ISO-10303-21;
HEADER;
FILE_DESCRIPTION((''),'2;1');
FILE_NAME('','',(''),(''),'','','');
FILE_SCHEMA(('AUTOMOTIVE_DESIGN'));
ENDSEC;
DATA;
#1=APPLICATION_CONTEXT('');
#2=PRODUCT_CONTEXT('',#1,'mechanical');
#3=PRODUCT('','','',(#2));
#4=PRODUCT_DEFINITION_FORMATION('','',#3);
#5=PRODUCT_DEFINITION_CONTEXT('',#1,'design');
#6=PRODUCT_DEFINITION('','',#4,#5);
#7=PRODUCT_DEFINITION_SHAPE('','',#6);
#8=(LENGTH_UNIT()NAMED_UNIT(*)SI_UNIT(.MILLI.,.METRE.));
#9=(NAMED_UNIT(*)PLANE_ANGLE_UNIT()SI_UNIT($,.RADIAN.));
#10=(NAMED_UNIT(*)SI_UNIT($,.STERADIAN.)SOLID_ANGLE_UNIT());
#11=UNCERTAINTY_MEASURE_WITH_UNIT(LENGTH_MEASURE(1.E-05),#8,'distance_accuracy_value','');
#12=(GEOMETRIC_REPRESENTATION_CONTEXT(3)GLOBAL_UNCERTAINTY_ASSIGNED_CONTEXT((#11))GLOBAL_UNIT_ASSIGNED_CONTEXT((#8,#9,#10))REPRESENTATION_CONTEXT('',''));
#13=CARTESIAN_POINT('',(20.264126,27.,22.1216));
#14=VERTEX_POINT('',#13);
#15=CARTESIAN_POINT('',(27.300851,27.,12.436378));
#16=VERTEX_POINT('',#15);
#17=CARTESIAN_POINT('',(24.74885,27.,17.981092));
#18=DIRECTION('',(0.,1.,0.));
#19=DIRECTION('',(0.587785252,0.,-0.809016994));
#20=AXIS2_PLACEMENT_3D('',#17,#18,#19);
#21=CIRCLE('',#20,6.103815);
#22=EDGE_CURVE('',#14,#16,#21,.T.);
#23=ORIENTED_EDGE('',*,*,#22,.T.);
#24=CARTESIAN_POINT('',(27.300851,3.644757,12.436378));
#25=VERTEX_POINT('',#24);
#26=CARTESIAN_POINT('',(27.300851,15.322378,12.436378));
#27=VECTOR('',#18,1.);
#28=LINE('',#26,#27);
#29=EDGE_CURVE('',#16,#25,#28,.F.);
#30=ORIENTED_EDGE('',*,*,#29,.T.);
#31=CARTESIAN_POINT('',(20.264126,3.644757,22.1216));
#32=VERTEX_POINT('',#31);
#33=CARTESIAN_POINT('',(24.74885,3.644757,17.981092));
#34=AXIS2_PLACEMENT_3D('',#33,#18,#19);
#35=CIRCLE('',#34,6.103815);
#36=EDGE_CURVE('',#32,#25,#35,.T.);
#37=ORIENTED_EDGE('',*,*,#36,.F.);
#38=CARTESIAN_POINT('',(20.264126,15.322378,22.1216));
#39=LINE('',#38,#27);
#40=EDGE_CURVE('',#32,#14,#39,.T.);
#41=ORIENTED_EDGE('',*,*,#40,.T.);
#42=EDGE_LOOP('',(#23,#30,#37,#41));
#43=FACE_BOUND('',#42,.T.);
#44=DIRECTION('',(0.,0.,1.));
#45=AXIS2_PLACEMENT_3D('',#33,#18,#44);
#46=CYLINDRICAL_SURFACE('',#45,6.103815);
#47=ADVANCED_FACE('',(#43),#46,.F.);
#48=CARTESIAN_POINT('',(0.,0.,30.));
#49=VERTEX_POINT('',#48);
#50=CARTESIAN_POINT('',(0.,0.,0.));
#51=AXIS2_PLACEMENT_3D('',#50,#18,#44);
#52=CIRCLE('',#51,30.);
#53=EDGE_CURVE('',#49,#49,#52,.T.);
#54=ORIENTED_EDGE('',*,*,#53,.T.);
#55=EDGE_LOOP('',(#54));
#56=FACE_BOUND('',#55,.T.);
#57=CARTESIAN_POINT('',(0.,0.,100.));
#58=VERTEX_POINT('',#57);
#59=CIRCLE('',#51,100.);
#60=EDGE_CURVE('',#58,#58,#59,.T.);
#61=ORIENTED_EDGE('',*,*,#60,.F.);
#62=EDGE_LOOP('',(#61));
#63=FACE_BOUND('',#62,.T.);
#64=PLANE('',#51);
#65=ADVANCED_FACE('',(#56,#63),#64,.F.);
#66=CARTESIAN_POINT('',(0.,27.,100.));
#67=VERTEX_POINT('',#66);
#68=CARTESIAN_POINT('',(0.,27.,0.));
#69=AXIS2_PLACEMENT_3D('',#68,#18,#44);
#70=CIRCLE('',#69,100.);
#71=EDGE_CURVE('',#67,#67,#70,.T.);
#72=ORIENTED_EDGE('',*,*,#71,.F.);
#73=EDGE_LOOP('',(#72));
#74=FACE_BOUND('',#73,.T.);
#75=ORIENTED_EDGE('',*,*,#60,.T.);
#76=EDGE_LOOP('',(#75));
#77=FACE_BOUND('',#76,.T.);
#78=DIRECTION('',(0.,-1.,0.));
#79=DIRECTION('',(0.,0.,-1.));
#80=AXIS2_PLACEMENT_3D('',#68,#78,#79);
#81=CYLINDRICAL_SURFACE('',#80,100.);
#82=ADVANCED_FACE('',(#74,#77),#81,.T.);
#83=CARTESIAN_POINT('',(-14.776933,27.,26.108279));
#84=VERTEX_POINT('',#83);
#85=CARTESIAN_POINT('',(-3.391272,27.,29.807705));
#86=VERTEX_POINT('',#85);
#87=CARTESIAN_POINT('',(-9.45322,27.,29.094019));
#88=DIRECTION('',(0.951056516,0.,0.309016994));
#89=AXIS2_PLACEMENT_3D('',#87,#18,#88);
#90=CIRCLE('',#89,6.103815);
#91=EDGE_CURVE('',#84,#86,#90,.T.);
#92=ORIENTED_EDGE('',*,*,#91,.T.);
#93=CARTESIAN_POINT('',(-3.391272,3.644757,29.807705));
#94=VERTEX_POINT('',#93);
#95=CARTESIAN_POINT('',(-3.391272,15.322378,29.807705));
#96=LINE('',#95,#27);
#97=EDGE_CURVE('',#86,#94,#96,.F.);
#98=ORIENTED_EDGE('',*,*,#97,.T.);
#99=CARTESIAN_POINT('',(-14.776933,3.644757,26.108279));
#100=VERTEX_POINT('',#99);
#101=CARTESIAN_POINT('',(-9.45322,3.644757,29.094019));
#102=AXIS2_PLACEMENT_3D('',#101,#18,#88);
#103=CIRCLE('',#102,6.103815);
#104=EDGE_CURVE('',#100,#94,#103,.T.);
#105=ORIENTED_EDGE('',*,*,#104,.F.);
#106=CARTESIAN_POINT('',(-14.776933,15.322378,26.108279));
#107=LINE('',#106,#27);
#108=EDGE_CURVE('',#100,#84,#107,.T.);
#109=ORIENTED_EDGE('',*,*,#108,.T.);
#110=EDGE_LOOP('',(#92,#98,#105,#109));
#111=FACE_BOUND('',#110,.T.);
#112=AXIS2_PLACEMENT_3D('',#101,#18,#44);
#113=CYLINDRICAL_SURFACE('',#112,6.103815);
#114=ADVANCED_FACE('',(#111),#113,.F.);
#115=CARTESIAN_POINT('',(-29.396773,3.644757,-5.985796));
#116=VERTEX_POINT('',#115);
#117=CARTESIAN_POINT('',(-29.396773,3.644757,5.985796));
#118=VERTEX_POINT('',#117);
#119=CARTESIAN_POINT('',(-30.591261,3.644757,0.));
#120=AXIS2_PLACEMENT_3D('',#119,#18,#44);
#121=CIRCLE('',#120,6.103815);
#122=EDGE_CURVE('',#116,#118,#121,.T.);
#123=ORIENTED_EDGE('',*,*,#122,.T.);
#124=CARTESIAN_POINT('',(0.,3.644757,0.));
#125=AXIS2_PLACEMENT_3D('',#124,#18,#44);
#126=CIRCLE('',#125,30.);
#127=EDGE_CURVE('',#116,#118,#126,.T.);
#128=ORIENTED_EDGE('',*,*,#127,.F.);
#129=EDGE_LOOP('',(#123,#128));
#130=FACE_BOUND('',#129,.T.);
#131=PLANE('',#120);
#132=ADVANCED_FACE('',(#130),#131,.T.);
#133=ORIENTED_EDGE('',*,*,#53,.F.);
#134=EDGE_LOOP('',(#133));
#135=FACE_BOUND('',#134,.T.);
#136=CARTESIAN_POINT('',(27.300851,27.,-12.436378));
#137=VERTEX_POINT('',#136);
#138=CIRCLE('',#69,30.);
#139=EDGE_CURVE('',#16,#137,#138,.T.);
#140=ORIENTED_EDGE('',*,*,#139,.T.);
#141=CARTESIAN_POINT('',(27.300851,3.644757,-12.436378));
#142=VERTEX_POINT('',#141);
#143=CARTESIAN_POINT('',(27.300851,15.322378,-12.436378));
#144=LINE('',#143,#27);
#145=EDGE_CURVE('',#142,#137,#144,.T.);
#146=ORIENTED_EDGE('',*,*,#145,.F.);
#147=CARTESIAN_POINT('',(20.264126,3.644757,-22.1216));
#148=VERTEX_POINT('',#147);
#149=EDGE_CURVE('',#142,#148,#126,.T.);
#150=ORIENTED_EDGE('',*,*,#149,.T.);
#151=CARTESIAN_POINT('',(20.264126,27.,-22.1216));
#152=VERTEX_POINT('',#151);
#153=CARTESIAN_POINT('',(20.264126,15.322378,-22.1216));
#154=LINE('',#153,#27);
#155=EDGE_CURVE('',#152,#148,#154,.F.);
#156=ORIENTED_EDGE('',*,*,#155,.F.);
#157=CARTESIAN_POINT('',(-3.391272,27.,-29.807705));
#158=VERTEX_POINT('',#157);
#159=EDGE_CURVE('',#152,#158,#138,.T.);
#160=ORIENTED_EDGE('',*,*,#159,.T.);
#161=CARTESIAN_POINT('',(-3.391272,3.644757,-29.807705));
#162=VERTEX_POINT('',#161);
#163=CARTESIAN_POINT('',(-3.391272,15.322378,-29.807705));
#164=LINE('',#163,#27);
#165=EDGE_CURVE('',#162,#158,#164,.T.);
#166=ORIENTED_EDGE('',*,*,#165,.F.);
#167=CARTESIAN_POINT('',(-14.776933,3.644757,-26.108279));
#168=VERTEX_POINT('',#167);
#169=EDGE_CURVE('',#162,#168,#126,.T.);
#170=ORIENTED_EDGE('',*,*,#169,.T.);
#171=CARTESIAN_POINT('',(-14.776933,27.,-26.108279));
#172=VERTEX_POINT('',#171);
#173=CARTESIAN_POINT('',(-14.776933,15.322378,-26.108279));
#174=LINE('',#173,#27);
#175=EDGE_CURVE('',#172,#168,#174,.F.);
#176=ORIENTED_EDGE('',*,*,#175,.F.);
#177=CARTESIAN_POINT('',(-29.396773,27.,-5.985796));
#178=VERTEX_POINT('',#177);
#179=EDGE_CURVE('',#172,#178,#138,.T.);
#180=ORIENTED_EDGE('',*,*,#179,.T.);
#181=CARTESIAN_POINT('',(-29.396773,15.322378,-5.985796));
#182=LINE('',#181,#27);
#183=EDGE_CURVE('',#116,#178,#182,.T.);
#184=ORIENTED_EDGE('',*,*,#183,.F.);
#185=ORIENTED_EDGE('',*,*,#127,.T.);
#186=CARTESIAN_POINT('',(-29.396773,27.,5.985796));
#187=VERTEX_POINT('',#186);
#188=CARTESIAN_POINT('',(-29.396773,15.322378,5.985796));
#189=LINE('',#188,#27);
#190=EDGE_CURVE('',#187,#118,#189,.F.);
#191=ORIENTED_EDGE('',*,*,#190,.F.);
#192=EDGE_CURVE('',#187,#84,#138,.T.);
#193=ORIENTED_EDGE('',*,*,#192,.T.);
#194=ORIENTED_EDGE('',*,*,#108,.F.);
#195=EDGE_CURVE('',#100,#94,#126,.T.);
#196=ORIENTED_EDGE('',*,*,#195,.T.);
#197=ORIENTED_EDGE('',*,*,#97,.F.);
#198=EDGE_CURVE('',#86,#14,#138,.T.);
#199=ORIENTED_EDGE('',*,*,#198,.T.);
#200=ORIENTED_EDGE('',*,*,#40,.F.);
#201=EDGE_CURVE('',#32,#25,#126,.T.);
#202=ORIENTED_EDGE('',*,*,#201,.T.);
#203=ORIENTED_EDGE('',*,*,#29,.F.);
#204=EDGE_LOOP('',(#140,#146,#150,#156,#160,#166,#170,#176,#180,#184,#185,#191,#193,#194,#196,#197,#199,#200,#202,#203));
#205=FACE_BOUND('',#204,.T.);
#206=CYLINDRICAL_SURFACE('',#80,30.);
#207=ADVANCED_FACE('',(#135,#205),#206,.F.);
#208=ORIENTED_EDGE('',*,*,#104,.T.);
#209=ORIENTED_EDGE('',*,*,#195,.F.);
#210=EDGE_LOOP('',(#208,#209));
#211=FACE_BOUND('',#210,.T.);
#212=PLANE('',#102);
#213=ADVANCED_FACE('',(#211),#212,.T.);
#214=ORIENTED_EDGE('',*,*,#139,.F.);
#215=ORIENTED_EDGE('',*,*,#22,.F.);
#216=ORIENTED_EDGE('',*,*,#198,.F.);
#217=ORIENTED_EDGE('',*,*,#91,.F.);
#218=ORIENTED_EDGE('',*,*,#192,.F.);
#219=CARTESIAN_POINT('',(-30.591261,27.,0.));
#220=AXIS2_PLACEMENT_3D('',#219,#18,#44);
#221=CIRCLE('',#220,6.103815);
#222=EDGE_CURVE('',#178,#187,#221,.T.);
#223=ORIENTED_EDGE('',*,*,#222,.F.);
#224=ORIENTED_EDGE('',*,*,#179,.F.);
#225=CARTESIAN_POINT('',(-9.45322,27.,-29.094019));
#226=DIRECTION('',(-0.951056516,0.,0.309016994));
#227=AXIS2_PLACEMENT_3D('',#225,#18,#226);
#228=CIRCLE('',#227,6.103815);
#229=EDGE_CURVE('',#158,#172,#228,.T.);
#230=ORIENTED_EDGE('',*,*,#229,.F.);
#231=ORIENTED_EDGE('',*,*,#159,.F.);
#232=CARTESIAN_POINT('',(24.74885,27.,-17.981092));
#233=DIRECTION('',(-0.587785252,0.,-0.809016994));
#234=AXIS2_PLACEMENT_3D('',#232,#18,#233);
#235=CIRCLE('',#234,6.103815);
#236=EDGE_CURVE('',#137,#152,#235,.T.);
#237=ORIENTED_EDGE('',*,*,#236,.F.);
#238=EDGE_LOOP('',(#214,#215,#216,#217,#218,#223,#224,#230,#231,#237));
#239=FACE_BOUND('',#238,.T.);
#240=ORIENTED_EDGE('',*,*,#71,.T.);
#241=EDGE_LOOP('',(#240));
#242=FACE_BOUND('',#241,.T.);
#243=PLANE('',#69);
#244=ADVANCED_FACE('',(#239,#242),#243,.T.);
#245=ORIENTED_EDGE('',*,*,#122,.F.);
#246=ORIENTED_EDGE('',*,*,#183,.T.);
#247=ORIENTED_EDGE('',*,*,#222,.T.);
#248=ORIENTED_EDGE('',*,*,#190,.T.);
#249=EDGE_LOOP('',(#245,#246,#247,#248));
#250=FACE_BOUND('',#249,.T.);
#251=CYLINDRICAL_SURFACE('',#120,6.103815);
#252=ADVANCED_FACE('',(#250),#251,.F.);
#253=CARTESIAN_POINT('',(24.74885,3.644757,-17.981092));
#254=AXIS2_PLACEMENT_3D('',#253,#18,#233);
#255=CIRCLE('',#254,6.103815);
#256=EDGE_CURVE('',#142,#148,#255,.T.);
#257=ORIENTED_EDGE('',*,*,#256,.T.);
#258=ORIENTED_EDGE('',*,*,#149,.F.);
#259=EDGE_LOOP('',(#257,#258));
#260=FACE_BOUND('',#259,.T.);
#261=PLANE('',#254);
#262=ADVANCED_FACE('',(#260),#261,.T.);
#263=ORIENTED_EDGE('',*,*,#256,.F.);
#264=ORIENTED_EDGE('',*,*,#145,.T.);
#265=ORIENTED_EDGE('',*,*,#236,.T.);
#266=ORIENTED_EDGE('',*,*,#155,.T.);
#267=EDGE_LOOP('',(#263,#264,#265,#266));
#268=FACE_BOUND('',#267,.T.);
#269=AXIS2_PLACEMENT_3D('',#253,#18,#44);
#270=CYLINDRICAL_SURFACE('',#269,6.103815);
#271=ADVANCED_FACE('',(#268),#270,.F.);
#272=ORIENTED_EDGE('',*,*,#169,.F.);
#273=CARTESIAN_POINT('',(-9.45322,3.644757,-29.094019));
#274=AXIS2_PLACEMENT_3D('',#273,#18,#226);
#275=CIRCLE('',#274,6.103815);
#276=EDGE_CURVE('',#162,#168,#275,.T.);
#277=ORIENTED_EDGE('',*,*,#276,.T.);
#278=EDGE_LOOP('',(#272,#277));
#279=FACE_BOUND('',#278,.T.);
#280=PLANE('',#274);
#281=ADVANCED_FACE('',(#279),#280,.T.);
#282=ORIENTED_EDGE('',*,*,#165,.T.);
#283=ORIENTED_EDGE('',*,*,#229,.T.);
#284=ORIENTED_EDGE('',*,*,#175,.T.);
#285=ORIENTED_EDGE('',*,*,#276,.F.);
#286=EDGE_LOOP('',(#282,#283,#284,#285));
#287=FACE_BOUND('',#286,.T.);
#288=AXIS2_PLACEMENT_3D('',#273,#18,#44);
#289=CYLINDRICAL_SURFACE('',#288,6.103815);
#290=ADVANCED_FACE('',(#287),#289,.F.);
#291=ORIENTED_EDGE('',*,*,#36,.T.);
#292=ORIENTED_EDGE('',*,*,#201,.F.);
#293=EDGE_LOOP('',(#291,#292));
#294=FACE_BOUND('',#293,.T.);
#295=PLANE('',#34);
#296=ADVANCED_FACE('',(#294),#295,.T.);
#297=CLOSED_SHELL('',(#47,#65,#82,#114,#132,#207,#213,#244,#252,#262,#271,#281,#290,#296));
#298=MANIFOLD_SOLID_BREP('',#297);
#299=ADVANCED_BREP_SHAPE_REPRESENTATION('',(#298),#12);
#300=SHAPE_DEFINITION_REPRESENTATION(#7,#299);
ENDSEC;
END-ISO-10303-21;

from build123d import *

# Parameters (mm, degrees)
SKETCH1_R           = 100
BOSS_EXTRUDE1_DEPTH = 27
SKETCH2_R           = 30
CUT_EXTRUDE1_DEPTH  = 144.975692393
SKETCH3_R           = 6.103815366
CUT_EXTRUDE2_DEPTH  = 23.355243157
CIRPATTERN1_COUNT   = 5


with BuildPart() as part:
    # Sketch1 → Boss-Extrude1 (new body)
    with BuildSketch(Plane(origin=(0, 0, 0), x_dir=(1, 0, 0), z_dir=(0, 1, 0))):
        Circle(SKETCH1_R)
    extrude(amount=BOSS_EXTRUDE1_DEPTH)

    # Sketch2 → Cut-Extrude1 (cut, through all)
    with BuildSketch(Plane(origin=(0, 0, 0), x_dir=(1, 0, 0), z_dir=(0, 1, 0))):
        Circle(SKETCH2_R)
    extrude(amount=CUT_EXTRUDE1_DEPTH, mode=Mode.SUBTRACT)

    # Sketch3 → Cut-Extrude2 (cut)
    with BuildSketch(Plane(origin=(0, 27, 0), x_dir=(1, 0, 0), z_dir=(0, 1, 0))):
        with Locations((-30.591261491, 0)):
            Circle(SKETCH3_R)
    cut_extrude2 = extrude(amount=-CUT_EXTRUDE2_DEPTH, mode=Mode.SUBTRACT)

    # CirPattern1: Cut-Extrude2 ×5 about axis
    cirpattern1_axis = Axis((0, 0, 0), (0, 1, 0))
    for i in range(1, CIRPATTERN1_COUNT):
        add(cut_extrude2.rotate(cirpattern1_axis, i * 360 / CIRPATTERN1_COUNT), mode=Mode.SUBTRACT)


solid = part.part
